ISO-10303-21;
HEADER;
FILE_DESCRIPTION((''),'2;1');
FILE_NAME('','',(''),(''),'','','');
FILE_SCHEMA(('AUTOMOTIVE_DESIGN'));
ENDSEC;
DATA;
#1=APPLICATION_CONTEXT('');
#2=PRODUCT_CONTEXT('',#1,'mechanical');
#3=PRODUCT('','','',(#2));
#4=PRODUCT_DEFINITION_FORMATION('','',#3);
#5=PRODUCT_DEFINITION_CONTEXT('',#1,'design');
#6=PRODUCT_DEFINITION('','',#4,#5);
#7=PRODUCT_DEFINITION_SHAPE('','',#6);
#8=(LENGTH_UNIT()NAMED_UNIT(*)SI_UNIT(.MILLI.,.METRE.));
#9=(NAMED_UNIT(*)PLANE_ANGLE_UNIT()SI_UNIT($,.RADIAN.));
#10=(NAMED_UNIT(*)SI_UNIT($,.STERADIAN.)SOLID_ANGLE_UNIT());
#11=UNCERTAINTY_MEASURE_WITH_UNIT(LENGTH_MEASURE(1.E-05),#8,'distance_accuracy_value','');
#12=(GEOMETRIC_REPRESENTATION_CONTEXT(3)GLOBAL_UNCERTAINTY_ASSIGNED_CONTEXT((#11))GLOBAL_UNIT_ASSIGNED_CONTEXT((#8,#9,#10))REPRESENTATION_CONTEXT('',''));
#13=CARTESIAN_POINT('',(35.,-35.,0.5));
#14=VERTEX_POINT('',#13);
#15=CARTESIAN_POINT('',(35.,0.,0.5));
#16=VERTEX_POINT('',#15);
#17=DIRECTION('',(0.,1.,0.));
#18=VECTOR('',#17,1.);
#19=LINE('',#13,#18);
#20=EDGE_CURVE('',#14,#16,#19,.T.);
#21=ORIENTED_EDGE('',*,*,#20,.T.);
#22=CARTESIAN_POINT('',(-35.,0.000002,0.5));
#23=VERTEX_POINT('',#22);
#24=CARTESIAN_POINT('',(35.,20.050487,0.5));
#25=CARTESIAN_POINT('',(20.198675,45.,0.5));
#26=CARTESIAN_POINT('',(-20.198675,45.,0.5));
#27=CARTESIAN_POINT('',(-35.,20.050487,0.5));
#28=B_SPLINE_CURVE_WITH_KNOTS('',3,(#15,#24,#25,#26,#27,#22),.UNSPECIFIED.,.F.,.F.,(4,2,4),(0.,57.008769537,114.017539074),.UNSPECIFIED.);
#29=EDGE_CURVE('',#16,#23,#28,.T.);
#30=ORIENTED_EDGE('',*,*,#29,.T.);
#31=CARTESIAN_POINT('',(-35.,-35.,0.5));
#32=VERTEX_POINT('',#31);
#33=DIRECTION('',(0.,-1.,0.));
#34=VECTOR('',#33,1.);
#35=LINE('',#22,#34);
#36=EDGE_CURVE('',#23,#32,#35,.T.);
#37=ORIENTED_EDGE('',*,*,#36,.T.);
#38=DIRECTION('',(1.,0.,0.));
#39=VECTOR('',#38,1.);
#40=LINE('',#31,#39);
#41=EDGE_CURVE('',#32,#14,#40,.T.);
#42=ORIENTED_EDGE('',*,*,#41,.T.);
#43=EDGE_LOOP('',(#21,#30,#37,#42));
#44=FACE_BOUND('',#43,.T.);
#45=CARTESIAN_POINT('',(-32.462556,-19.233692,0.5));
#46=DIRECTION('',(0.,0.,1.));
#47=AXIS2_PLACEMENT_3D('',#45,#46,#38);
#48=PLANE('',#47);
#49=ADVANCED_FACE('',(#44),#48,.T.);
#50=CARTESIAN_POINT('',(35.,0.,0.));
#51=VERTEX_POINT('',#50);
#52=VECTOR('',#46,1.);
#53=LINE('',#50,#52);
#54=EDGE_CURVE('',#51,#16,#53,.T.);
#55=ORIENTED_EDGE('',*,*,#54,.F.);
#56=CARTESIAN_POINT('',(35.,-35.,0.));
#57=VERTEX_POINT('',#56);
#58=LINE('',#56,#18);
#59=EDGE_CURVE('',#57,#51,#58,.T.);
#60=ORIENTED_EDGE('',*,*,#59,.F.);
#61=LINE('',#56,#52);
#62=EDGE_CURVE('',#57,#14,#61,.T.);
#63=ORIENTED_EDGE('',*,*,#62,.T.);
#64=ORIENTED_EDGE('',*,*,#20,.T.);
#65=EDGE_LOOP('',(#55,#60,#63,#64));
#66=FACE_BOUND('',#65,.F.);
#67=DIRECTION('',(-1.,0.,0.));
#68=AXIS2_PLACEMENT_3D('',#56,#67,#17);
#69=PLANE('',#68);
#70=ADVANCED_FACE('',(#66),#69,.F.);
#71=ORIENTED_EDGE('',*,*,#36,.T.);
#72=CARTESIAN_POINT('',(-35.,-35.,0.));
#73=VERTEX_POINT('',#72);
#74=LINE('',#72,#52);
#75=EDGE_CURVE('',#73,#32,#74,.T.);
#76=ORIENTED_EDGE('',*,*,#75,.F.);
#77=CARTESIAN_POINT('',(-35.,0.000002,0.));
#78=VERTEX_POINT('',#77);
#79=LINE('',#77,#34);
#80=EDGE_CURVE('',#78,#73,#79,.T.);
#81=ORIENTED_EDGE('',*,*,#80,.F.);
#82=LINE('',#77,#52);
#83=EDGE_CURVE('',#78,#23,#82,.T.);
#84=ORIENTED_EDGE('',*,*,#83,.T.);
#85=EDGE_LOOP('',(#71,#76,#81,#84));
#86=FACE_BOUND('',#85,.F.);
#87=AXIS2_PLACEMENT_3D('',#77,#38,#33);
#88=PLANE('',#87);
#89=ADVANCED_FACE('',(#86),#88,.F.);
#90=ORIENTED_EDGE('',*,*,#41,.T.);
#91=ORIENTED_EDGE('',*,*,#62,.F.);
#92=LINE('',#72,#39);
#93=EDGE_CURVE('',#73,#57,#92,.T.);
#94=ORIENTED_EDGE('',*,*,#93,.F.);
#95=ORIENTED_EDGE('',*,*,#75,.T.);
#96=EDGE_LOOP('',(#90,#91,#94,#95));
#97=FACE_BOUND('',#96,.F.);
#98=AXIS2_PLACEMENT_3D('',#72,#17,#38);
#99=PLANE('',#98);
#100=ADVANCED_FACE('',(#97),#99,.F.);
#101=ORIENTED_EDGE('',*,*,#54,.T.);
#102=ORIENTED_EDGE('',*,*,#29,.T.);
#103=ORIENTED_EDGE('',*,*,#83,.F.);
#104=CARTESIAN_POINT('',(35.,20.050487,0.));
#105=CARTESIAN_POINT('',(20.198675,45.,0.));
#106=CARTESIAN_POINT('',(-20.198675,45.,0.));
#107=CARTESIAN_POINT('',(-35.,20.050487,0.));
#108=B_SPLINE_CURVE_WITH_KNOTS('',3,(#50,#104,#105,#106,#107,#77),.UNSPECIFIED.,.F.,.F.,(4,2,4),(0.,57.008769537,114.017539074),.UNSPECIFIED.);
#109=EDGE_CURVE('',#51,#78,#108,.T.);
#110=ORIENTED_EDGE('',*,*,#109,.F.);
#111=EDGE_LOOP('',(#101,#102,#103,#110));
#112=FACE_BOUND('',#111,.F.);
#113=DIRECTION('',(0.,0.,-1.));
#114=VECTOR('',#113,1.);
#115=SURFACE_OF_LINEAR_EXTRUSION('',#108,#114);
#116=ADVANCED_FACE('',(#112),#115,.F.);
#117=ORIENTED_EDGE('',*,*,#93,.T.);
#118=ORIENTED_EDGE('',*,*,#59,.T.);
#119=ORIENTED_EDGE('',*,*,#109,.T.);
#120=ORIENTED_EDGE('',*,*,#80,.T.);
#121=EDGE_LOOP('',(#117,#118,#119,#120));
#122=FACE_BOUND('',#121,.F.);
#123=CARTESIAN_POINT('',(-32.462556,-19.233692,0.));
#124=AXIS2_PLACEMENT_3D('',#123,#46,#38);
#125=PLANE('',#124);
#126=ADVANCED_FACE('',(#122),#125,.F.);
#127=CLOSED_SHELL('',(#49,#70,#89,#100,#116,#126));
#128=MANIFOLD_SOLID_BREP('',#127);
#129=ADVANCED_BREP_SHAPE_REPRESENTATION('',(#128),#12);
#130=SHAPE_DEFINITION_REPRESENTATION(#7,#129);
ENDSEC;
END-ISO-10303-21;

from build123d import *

# Parameters (mm, degrees)
F1_DEPTH = 0.5


# Not quite as in the source:
# - ends of sketch curves that miss each other by under 0.0002 mm in the source are joined


with BuildPart() as f1:
    # F0 (on Top) → F1 (new body)
    with BuildSketch(Plane.XY):
        with BuildLine():
            Line((-35, 2.1762e-06), (-35, -35))
            Line((-35, -35), (-27, -35))
            Line((-27, -35), (-27, -22.2710574513))
            ThreePointArc((-27, -22.2710574513), (-32.9393385518, -11.8321585422), (-35, 2.1762e-06))
        make_face()
        with BuildLine():
            Line((-27, -22.2710574513), (-27, -35))
            Line((-27, -35), (0, -35))
            ThreePointArc((0, -35), (-14.9250291324, -31.658229663), (-27, -22.2710574513))
        make_face()
        with BuildLine():
            ThreePointArc((27, -22.2710574513), (14.9250291324, -31.658229663), (0, -35))
            Line((0, -35), (27, -35))
            Line((27, -35), (27, -22.2710574513))
        make_face()
        with BuildLine():
            Line((27, -22.2710574513), (27, -35))
            Line((27, -35), (35, -35))
            Line((35, -35), (35, 0))
            ThreePointArc((35, 0), (32.939338184, -11.8321595662), (27, -22.2710574513))
        make_face()
        with BuildLine():
            add(Edge.make_bspline(
                [(0, 45), (-20.1986748725, 45), (-35, 20.0504870868), (-35, 2.1762e-06)],
                knots=[0, 0, 0, 0, 57.0087695372, 57.0087695372, 57.0087695372, 57.0087695372], degree=3))
            ThreePointArc((-35, 2.1762e-06), (-28.4666369261, 20.3629708568), (-11.3056830814, 33.1237306181))
            add(Edge.make_bspline(
                [(0, 37), (-0.2833414452, 37.0069688983), (-1.1232932293, 37.0068386903), (-2.7957299856, 36.8864035146), (-4.9942322029, 36.3521195303), (-7.6997383876, 35.2871018647), (-9.7958540485, 34.148638444), (-11.0540635502, 33.3003360386), (-11.3056830814, 33.1237306181)],
                knots=[0, 0, 0, 0, 0.8506820357, 2.5185967411, 5.0181648841, 7.6012051941, 11.2266191262, 12.1476935207, 12.1476935207, 12.1476935207, 12.1476935207], degree=3))
            add(Edge.make_bspline(
                [(0, 37), (0.2833414452, 37.0069688983), (1.1232932293, 37.0068386903), (2.7957299856, 36.8864035146), (4.9942322029, 36.3521195303), (7.6997383876, 35.2871018647), (9.7958540485, 34.148638444), (11.0540635502, 33.3003360386), (11.3056830814, 33.1237306181)],
                knots=[0, 0, 0, 0, 0.8506820357, 2.5185967411, 5.0181648841, 7.6012051941, 11.2266191262, 12.1476935207, 12.1476935207, 12.1476935207, 12.1476935207], degree=3))
            ThreePointArc((11.3056830814, 33.1237306181), (28.4666375592, 20.3629699719), (35, 0))
            add(Edge.make_bspline(
                [(0, 45), (20.1986748725, 45), (35, 20.0504870868), (35, 0)],
                knots=[0, 0, 0, 0, 57.0087695372, 57.0087695372, 57.0087695372, 57.0087695372], degree=3))
        make_face()
        with BuildLine():
            Line((27, 2.1762e-06), (27, -22.2710574513))
            ThreePointArc((27, -22.2710574513), (32.939338184, -11.8321595662), (35, 0))
            ThreePointArc((35, 0), (28.4666375592, 20.3629699719), (11.3056830814, 33.1237306181))
            add(Edge.make_bspline(
                [(11.3056830814, 33.1237306181), (12.4097508436, 32.3488132243), (15.1414824386, 30.0752135158), (18.8876274503, 25.5283101279), (22.422035633, 19.604279738), (25.0662594291, 13.1120426553), (26.6478130576, 7.1844788974), (27.0173066601, 2.7756083867), (27.018694794, 0.6711028041), (27, 2.1762e-06)],
                knots=[12.1476935207, 12.1476935207, 12.1476935207, 12.1476935207, 16.189226149, 22.7543847852, 29.7183326598, 36.8091409701, 43.7289829573, 48.0262708445, 50.0404462243, 50.0404462243, 50.0404462243, 50.0404462243], degree=3))
        make_face()
        with BuildLine():
            ThreePointArc((-11.3056830814, 33.1237306181), (-28.4666369261, 20.3629708568), (-35, 2.1762e-06))
            ThreePointArc((-35, 2.1762e-06), (-32.9393385518, -11.8321585422), (-27, -22.2710574513))
            Line((-27, -22.2710574513), (-27, 2.1762e-06))
            add(Edge.make_bspline(
                [(-11.3056830814, 33.1237306181), (-12.4097508436, 32.3488132243), (-15.1414824386, 30.0752135158), (-18.8876274503, 25.5283101279), (-22.422035633, 19.604279738), (-25.0662594291, 13.1120426553), (-26.6478130576, 7.1844788974), (-27.0173066601, 2.7756083867), (-27.018694794, 0.6711028041), (-27, 2.1762e-06)],
                knots=[12.1476935207, 12.1476935207, 12.1476935207, 12.1476935207, 16.189226149, 22.7543847852, 29.7183326598, 36.8091409701, 43.7289829573, 48.0262708445, 50.0404462243, 50.0404462243, 50.0404462243, 50.0404462243], degree=3))
        make_face()
        with BuildLine():
            ThreePointArc((-27, -22.2710574513), (-14.9250291324, -31.658229663), (0, -35))
            ThreePointArc((0, -35), (14.9250291324, -31.658229663), (27, -22.2710574513))
            Line((27, -22.2710574513), (27, 2.1762e-06))
            add(Edge.make_bspline(
                [(11.3056830814, 33.1237306181), (12.4097508436, 32.3488132243), (15.1414824386, 30.0752135158), (18.8876274503, 25.5283101279), (22.422035633, 19.604279738), (25.0662594291, 13.1120426553), (26.6478130576, 7.1844788974), (27.0173066601, 2.7756083867), (27.018694794, 0.6711028041), (27, 2.1762e-06)],
                knots=[12.1476935207, 12.1476935207, 12.1476935207, 12.1476935207, 16.189226149, 22.7543847852, 29.7183326598, 36.8091409701, 43.7289829573, 48.0262708445, 50.0404462243, 50.0404462243, 50.0404462243, 50.0404462243], degree=3))
            ThreePointArc((11.3056830814, 33.1237306181), (0, 35), (-11.3056830814, 33.1237306181))
            add(Edge.make_bspline(
                [(-11.3056830814, 33.1237306181), (-12.4097508436, 32.3488132243), (-15.1414824386, 30.0752135158), (-18.8876274503, 25.5283101279), (-22.422035633, 19.604279738), (-25.0662594291, 13.1120426553), (-26.6478130576, 7.1844788974), (-27.0173066601, 2.7756083867), (-27.018694794, 0.6711028041), (-27, 2.1762e-06)],
                knots=[12.1476935207, 12.1476935207, 12.1476935207, 12.1476935207, 16.189226149, 22.7543847852, 29.7183326598, 36.8091409701, 43.7289829573, 48.0262708445, 50.0404462243, 50.0404462243, 50.0404462243, 50.0404462243], degree=3))
            Line((-27, 2.1762e-06), (-27, -22.2710574513))
        make_face()
        with BuildLine():
            add(Edge.make_bspline(
                [(0, 37), (-0.2833414452, 37.0069688983), (-1.1232932293, 37.0068386903), (-2.7957299856, 36.8864035146), (-4.9942322029, 36.3521195303), (-7.6997383876, 35.2871018647), (-9.7958540485, 34.148638444), (-11.0540635502, 33.3003360386), (-11.3056830814, 33.1237306181)],
                knots=[0, 0, 0, 0, 0.8506820357, 2.5185967411, 5.0181648841, 7.6012051941, 11.2266191262, 12.1476935207, 12.1476935207, 12.1476935207, 12.1476935207], degree=3))
            ThreePointArc((-11.3056830814, 33.1237306181), (0, 35), (11.3056830814, 33.1237306181))
            add(Edge.make_bspline(
                [(0, 37), (0.2833414452, 37.0069688983), (1.1232932293, 37.0068386903), (2.7957299856, 36.8864035146), (4.9942322029, 36.3521195303), (7.6997383876, 35.2871018647), (9.7958540485, 34.148638444), (11.0540635502, 33.3003360386), (11.3056830814, 33.1237306181)],
                knots=[0, 0, 0, 0, 0.8506820357, 2.5185967411, 5.0181648841, 7.6012051941, 11.2266191262, 12.1476935207, 12.1476935207, 12.1476935207, 12.1476935207], degree=3))
        make_face()
    extrude(amount=F1_DEPTH)


solid = f1.part
